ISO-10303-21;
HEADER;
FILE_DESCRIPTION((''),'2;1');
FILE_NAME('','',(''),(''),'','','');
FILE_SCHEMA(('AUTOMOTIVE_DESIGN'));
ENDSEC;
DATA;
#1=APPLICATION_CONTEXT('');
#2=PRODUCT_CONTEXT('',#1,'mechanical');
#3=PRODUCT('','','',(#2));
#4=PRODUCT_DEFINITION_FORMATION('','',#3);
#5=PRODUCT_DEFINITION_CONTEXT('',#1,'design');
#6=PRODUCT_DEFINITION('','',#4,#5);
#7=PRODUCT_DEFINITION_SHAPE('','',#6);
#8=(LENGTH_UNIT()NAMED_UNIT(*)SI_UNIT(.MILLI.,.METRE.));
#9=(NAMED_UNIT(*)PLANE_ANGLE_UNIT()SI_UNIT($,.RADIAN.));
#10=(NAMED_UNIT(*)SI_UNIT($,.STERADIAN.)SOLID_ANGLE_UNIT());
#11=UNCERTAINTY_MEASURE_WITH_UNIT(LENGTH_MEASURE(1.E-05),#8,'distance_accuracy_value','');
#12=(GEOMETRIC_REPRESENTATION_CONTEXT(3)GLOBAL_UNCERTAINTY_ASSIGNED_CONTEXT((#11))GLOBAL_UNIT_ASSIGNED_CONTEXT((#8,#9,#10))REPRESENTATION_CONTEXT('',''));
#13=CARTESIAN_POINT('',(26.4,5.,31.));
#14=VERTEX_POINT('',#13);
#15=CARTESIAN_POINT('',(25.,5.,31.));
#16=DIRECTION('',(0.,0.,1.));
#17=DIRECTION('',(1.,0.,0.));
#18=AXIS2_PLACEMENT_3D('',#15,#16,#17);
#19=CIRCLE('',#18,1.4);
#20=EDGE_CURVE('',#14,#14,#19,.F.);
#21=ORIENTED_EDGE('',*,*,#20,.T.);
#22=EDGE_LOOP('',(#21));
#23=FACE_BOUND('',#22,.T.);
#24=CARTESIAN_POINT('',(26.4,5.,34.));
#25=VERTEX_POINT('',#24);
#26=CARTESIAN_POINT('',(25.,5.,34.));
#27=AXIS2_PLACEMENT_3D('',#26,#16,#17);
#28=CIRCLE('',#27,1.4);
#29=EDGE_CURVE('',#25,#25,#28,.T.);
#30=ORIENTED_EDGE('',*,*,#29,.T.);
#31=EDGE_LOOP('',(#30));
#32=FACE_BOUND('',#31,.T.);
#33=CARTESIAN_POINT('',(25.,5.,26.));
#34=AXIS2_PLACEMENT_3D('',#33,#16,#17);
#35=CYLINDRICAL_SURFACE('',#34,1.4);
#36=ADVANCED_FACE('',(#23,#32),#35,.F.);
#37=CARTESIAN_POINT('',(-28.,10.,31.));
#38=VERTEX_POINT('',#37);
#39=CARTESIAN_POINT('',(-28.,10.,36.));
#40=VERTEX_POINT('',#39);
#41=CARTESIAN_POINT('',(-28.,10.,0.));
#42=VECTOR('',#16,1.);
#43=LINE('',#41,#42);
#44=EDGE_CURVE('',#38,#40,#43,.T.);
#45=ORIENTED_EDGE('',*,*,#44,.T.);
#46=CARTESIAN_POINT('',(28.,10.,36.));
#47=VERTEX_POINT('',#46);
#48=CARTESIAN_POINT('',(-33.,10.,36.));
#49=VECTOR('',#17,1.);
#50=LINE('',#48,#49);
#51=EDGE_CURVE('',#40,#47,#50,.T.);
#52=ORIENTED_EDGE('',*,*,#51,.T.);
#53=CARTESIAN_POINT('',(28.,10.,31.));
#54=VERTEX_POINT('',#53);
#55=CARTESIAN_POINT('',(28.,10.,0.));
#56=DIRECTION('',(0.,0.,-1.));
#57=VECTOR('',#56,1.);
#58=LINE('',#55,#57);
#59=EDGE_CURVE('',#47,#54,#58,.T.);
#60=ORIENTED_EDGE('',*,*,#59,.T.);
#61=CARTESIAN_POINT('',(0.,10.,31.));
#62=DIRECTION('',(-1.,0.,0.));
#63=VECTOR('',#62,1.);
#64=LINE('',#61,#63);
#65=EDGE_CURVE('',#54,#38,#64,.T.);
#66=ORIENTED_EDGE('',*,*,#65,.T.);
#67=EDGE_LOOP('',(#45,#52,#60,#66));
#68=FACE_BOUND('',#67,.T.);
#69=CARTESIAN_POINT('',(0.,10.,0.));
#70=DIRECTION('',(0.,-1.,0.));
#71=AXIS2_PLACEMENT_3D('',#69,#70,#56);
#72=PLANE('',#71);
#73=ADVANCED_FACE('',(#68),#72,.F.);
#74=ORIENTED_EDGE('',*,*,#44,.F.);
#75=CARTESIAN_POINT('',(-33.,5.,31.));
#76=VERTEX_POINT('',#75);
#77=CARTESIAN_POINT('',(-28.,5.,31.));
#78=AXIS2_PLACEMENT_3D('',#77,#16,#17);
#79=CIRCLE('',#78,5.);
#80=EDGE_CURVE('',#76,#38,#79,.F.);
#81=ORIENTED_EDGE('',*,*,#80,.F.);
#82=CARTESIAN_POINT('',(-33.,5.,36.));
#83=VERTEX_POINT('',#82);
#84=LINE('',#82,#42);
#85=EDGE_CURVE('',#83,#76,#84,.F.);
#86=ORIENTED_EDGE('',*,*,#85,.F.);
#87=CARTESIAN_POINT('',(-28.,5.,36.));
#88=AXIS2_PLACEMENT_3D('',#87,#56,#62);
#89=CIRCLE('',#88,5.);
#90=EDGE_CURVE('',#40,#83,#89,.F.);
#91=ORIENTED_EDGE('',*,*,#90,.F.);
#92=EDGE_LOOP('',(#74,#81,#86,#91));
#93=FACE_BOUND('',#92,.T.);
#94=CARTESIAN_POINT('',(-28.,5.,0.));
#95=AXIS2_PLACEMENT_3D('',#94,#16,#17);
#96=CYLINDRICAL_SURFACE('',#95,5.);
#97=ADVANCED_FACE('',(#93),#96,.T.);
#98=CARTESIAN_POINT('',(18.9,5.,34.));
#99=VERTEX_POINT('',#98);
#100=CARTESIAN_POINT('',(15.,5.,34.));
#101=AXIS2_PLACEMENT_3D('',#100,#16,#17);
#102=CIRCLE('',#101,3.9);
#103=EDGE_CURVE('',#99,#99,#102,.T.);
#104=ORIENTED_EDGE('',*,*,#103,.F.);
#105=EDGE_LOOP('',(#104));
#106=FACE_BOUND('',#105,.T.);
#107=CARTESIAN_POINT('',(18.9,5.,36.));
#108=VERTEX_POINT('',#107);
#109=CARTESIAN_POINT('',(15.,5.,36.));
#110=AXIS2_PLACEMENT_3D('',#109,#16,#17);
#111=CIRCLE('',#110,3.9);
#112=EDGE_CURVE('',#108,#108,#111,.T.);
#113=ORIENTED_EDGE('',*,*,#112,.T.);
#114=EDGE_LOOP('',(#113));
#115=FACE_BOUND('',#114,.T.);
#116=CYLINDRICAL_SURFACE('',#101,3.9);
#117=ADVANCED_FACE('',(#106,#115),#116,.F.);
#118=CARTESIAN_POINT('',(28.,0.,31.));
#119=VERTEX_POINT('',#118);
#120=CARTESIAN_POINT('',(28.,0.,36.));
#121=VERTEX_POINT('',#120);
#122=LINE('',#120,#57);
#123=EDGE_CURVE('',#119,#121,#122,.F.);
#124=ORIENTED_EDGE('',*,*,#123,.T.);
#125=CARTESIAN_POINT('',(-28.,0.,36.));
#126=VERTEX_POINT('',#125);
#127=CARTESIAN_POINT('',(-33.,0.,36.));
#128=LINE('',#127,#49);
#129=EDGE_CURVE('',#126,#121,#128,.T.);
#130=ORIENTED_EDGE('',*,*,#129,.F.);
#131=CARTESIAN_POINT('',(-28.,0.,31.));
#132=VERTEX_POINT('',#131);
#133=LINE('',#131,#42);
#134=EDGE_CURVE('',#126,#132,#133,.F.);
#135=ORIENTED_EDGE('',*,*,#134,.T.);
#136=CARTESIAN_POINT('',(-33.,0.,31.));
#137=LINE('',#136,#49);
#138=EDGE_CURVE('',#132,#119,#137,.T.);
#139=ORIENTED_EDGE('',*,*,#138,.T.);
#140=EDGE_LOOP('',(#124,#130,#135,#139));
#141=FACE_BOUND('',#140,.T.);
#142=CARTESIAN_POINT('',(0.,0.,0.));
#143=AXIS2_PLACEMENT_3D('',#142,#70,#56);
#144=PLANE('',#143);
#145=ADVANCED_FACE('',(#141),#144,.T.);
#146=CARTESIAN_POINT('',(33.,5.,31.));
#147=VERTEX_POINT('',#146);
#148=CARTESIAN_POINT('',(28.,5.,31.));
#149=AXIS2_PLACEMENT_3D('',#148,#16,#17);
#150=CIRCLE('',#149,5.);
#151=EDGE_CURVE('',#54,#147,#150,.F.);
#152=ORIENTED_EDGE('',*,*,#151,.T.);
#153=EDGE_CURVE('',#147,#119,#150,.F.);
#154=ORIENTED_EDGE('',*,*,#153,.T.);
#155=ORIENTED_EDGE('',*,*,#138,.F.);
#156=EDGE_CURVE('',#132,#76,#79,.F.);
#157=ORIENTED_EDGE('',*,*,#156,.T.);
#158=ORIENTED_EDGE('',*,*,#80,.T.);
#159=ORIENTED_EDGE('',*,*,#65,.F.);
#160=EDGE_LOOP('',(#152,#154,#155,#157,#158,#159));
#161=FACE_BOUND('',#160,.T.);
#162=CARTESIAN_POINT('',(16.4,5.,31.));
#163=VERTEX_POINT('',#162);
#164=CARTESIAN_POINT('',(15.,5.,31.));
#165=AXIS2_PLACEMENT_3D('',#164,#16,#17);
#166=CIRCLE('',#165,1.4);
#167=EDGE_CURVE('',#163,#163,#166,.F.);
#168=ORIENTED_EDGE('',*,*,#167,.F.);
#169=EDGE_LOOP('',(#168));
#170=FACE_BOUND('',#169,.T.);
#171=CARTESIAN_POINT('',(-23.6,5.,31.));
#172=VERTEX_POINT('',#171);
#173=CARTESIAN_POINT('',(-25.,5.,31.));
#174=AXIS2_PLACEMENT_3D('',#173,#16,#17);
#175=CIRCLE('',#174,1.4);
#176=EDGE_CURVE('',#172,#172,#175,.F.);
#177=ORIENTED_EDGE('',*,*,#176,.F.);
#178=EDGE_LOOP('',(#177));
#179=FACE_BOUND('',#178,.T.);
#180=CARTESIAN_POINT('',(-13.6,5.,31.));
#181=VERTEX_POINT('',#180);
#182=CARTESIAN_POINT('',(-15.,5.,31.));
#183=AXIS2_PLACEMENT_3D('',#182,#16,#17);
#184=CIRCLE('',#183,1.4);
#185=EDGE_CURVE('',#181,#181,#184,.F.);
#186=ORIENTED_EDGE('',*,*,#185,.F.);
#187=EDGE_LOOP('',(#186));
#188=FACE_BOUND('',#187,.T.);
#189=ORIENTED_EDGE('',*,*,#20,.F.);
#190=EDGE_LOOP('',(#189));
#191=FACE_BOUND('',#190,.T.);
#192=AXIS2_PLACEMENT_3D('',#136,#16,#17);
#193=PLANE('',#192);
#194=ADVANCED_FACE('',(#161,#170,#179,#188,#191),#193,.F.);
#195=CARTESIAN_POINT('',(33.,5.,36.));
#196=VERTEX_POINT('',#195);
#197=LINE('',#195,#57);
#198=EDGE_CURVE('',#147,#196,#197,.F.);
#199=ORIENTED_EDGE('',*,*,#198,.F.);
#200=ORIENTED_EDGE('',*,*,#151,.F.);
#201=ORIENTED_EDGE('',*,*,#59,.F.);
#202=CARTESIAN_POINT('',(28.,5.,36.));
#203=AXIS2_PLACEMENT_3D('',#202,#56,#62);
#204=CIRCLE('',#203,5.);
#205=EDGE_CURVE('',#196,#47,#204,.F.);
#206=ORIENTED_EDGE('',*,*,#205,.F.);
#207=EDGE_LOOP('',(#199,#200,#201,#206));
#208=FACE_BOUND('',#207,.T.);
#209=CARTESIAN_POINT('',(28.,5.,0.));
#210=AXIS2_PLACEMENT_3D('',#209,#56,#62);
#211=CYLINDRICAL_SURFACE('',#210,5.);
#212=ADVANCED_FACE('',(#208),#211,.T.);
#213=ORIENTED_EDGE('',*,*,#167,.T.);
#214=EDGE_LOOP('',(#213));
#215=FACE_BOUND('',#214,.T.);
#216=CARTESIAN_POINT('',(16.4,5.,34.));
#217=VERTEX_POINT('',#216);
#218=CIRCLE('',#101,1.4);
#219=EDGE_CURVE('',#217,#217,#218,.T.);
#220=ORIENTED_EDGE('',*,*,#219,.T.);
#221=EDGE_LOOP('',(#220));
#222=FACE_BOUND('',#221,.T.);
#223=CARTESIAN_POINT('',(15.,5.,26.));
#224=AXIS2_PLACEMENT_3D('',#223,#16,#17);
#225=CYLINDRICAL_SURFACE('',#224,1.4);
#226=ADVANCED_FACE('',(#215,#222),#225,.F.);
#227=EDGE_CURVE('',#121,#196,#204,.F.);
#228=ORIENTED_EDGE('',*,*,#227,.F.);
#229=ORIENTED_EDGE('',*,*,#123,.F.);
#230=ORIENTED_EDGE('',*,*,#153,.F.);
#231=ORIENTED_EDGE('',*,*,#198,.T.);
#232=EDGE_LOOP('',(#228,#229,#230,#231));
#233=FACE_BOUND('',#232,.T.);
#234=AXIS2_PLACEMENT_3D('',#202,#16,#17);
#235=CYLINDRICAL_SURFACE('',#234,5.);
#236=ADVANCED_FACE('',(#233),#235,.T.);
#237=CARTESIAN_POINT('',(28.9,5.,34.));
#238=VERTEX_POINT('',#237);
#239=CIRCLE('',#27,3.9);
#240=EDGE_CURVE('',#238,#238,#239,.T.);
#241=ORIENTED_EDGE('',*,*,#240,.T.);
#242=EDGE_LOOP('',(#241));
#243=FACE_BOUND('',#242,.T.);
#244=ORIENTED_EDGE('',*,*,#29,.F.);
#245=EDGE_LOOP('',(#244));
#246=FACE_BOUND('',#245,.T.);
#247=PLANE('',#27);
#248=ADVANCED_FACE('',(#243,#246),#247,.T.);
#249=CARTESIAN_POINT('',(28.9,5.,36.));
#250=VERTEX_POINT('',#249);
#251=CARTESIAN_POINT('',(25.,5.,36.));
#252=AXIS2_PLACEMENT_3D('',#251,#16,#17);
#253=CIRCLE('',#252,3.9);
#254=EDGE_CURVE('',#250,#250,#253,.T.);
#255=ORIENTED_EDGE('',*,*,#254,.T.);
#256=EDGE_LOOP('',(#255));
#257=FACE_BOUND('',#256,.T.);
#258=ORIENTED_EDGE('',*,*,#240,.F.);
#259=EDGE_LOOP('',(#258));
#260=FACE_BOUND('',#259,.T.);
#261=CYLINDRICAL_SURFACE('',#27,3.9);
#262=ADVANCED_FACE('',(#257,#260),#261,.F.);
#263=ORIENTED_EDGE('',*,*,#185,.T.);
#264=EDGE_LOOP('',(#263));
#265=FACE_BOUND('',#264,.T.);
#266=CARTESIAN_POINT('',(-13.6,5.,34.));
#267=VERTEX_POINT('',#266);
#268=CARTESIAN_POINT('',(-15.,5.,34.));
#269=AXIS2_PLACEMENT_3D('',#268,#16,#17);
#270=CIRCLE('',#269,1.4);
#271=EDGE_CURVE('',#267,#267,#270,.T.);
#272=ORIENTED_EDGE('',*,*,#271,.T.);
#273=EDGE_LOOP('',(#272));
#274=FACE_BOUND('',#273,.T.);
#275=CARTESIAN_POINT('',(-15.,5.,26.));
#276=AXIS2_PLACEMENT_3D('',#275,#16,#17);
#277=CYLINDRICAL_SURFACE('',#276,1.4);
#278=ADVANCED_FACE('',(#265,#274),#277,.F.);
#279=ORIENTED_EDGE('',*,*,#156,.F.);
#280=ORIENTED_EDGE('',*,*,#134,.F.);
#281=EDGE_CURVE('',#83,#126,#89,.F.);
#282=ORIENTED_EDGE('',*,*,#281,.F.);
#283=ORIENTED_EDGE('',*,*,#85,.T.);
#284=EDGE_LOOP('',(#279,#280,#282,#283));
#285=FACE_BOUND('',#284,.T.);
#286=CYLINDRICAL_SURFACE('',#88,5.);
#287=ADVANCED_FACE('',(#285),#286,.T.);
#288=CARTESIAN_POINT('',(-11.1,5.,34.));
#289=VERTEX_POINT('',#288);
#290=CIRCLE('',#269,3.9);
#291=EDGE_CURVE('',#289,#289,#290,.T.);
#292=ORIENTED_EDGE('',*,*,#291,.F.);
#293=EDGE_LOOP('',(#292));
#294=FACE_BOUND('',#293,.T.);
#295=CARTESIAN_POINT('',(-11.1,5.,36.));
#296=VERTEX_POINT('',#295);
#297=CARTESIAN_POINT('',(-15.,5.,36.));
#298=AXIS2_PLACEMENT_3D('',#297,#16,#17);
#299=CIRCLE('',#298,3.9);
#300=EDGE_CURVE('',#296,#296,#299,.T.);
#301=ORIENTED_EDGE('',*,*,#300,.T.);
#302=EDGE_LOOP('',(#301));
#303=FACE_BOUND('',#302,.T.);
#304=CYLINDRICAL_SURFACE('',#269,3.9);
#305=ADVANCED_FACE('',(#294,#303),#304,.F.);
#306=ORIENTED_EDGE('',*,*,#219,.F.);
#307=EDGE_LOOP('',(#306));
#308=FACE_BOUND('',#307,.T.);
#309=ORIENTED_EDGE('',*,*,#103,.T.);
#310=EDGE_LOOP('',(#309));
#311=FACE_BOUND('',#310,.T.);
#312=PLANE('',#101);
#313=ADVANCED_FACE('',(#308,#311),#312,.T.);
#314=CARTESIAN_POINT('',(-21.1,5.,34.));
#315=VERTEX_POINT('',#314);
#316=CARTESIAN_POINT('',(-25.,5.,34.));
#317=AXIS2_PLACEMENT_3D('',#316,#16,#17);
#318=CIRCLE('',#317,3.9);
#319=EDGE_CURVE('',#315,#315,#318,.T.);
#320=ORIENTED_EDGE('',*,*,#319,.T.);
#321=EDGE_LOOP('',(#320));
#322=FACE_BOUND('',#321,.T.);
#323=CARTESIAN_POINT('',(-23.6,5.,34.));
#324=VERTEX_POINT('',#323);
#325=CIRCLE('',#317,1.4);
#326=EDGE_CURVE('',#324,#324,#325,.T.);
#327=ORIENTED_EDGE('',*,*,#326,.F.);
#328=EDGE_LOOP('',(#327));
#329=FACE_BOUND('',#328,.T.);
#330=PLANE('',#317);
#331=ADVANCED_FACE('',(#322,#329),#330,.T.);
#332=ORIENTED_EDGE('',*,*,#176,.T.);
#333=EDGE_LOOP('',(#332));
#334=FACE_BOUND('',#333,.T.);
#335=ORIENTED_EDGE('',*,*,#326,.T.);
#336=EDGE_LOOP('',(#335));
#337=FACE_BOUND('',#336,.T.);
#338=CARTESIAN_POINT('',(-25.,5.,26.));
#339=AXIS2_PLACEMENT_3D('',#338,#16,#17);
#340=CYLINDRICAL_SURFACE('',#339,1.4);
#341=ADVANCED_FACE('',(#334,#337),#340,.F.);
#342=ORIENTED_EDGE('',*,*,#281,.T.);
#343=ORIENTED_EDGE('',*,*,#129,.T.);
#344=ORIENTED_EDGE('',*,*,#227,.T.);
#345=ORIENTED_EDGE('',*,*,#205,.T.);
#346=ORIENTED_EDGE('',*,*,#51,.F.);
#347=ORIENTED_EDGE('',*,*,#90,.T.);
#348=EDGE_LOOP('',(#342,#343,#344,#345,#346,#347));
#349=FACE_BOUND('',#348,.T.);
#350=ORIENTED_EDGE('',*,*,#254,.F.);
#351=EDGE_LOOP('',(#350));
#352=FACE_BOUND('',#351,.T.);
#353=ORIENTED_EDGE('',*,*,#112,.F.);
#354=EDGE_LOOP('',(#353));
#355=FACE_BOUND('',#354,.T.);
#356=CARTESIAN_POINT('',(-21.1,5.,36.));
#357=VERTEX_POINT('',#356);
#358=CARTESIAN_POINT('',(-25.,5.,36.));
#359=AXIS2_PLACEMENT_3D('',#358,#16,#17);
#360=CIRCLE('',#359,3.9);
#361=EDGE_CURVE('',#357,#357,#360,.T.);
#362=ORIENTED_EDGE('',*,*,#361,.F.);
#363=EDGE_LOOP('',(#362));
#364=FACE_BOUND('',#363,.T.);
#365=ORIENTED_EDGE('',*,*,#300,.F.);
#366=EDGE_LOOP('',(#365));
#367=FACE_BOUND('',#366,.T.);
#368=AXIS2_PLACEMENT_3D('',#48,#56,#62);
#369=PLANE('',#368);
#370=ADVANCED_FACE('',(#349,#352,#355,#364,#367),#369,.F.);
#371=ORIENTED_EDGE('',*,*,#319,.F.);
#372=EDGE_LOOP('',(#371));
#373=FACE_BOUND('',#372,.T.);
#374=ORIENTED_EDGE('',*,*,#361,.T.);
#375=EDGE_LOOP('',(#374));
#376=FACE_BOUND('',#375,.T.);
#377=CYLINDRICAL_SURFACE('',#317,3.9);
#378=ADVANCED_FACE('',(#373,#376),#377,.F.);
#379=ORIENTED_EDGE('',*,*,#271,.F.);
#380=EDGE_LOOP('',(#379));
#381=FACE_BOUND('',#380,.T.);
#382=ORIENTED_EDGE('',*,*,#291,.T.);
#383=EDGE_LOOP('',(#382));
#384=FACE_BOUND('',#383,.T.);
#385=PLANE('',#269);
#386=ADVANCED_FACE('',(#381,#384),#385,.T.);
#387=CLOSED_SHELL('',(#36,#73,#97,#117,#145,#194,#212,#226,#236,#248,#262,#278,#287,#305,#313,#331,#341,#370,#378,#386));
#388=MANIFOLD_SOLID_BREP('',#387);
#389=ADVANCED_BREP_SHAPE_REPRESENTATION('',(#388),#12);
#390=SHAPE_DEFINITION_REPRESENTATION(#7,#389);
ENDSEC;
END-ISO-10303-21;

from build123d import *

# Parameters (mm, degrees)
SKETCH1_W               = 66
SKETCH1_H               = 72
BOSS_EXTRUDE1_DEPTH     = 10
SKETCH2_R               = 1.4
CUT_EXTRUDE1_DEPTH      = 10
CUT_EXTRUDE2_DEPTH      = 50.849774322
CUT_EXTRUDE2_DEPTH_BACK = 50.849774322
SKETCH3_W               = 30
SKETCH3_H               = 5
SKETCH5_R               = 7.5
BOSS_EXTRUDE2_DEPTH     = 1.5
SKETCH6_W               = 67
SKETCH6_H               = 25
CUT_EXTRUDE4_DEPTH      = 77.054256949
FILLET1_R               = 5
SKETCH7_R               = 3.9
SKETCH7_R_2             = 1.4
CUT_EXTRUDE5_DEPTH      = 2


with BuildPart() as part:
    # Sketch1 → Boss-Extrude1 (new body)
    with BuildSketch(Plane(origin=(0, 0, 0), x_dir=(1, 0, 0), z_dir=(0, 1, 0))):
        Rectangle(SKETCH1_W, SKETCH1_H)
    extrude(amount=BOSS_EXTRUDE1_DEPTH)

    # Sketch2 → Cut-Extrude1 (cut)
    with BuildSketch(Plane.XY.offset(36)):
        with Locations((-15, 5)):
            Circle(SKETCH2_R)
        with Locations((15, 5)):
            Circle(SKETCH2_R)
        with Locations((-25, 5)):
            Circle(SKETCH2_R)
        with Locations((25, 5)):
            Circle(SKETCH2_R)
    cut_extrude1 = extrude(amount=-CUT_EXTRUDE1_DEPTH, mode=Mode.SUBTRACT)

    # Mirror1: Cut-Extrude1 across plane
    add(cut_extrude1.mirror(Plane.XY), mode=Mode.SUBTRACT)

    # Sketch3 → Cut-Extrude2 (cut, two sides: drawn at the far end of the back side and taken through both)
    with BuildSketch(Plane(origin=(0, 10, 0), x_dir=(1, 0, 0), z_dir=(0, 1, 0)).offset(-CUT_EXTRUDE2_DEPTH_BACK)):
        with Locations((0, -19)):
            Rectangle(SKETCH3_W, SKETCH3_H)
        with Locations((0, 19)):
            Rectangle(SKETCH3_W, SKETCH3_H)
    extrude(amount=CUT_EXTRUDE2_DEPTH + CUT_EXTRUDE2_DEPTH_BACK, mode=Mode.SUBTRACT)

    # Sketch5 → Boss-Extrude2 (add)
    with BuildSketch(Plane(origin=(0, 10, 0), x_dir=(1, 0, 0), z_dir=(0, 1, 0))):
        with Locations(Location((0, 0, 0), (0, 0, 270))):
            Circle(SKETCH5_R)
    extrude(amount=BOSS_EXTRUDE2_DEPTH)

    # Sketch6 → Cut-Extrude4 (cut, through all)
    with BuildSketch(Plane(origin=(33, 0, 0), x_dir=(0, 0, -1), z_dir=(1, 0, 0))):
        with Locations((2.5, 12.5)):
            Rectangle(SKETCH6_W, SKETCH6_H)
    extrude(amount=-CUT_EXTRUDE4_DEPTH, mode=Mode.SUBTRACT)

    # Fillet1
    fillet1_edges = [part.edges().sort_by_distance(p)[0] for p in [
        (33, 0, 33.5),
        (33, 10, 33.5),
        (-33, 0, 33.5),
        (-33, 10, 33.5),
    ]]
    fillet(fillet1_edges, radius=FILLET1_R - 0.0001)  # a hair under: the kernel refuses the full size

    # Sketch7 → Cut-Extrude5 (cut)
    # profile 1 of 4: a face of its own
    with BuildSketch(Plane.XY.offset(36)):
        with Locations((-25, 5)):
            Circle(SKETCH7_R)
        with Locations((-25, 5)):
            Circle(SKETCH7_R_2, mode=Mode.SUBTRACT)
    # profile 2 of 4: a face of its own
    with BuildSketch(Plane.XY.offset(36)):
        with Locations((-15, 5)):
            Circle(SKETCH7_R)
        with Locations((-15, 5)):
            Circle(SKETCH7_R_2, mode=Mode.SUBTRACT)
    # profile 3 of 4: a face of its own
    with BuildSketch(Plane.XY.offset(36)):
        with Locations((15, 5)):
            Circle(SKETCH7_R)
        with Locations((15, 5)):
            Circle(SKETCH7_R_2, mode=Mode.SUBTRACT)
    # profile 4 of 4: a face of its own
    with BuildSketch(Plane.XY.offset(36)):
        with Locations((25, 5)):
            Circle(SKETCH7_R)
        with Locations((25, 5)):
            Circle(SKETCH7_R_2, mode=Mode.SUBTRACT)
    extrude(amount=-CUT_EXTRUDE5_DEPTH, mode=Mode.SUBTRACT)


solid = part.part
